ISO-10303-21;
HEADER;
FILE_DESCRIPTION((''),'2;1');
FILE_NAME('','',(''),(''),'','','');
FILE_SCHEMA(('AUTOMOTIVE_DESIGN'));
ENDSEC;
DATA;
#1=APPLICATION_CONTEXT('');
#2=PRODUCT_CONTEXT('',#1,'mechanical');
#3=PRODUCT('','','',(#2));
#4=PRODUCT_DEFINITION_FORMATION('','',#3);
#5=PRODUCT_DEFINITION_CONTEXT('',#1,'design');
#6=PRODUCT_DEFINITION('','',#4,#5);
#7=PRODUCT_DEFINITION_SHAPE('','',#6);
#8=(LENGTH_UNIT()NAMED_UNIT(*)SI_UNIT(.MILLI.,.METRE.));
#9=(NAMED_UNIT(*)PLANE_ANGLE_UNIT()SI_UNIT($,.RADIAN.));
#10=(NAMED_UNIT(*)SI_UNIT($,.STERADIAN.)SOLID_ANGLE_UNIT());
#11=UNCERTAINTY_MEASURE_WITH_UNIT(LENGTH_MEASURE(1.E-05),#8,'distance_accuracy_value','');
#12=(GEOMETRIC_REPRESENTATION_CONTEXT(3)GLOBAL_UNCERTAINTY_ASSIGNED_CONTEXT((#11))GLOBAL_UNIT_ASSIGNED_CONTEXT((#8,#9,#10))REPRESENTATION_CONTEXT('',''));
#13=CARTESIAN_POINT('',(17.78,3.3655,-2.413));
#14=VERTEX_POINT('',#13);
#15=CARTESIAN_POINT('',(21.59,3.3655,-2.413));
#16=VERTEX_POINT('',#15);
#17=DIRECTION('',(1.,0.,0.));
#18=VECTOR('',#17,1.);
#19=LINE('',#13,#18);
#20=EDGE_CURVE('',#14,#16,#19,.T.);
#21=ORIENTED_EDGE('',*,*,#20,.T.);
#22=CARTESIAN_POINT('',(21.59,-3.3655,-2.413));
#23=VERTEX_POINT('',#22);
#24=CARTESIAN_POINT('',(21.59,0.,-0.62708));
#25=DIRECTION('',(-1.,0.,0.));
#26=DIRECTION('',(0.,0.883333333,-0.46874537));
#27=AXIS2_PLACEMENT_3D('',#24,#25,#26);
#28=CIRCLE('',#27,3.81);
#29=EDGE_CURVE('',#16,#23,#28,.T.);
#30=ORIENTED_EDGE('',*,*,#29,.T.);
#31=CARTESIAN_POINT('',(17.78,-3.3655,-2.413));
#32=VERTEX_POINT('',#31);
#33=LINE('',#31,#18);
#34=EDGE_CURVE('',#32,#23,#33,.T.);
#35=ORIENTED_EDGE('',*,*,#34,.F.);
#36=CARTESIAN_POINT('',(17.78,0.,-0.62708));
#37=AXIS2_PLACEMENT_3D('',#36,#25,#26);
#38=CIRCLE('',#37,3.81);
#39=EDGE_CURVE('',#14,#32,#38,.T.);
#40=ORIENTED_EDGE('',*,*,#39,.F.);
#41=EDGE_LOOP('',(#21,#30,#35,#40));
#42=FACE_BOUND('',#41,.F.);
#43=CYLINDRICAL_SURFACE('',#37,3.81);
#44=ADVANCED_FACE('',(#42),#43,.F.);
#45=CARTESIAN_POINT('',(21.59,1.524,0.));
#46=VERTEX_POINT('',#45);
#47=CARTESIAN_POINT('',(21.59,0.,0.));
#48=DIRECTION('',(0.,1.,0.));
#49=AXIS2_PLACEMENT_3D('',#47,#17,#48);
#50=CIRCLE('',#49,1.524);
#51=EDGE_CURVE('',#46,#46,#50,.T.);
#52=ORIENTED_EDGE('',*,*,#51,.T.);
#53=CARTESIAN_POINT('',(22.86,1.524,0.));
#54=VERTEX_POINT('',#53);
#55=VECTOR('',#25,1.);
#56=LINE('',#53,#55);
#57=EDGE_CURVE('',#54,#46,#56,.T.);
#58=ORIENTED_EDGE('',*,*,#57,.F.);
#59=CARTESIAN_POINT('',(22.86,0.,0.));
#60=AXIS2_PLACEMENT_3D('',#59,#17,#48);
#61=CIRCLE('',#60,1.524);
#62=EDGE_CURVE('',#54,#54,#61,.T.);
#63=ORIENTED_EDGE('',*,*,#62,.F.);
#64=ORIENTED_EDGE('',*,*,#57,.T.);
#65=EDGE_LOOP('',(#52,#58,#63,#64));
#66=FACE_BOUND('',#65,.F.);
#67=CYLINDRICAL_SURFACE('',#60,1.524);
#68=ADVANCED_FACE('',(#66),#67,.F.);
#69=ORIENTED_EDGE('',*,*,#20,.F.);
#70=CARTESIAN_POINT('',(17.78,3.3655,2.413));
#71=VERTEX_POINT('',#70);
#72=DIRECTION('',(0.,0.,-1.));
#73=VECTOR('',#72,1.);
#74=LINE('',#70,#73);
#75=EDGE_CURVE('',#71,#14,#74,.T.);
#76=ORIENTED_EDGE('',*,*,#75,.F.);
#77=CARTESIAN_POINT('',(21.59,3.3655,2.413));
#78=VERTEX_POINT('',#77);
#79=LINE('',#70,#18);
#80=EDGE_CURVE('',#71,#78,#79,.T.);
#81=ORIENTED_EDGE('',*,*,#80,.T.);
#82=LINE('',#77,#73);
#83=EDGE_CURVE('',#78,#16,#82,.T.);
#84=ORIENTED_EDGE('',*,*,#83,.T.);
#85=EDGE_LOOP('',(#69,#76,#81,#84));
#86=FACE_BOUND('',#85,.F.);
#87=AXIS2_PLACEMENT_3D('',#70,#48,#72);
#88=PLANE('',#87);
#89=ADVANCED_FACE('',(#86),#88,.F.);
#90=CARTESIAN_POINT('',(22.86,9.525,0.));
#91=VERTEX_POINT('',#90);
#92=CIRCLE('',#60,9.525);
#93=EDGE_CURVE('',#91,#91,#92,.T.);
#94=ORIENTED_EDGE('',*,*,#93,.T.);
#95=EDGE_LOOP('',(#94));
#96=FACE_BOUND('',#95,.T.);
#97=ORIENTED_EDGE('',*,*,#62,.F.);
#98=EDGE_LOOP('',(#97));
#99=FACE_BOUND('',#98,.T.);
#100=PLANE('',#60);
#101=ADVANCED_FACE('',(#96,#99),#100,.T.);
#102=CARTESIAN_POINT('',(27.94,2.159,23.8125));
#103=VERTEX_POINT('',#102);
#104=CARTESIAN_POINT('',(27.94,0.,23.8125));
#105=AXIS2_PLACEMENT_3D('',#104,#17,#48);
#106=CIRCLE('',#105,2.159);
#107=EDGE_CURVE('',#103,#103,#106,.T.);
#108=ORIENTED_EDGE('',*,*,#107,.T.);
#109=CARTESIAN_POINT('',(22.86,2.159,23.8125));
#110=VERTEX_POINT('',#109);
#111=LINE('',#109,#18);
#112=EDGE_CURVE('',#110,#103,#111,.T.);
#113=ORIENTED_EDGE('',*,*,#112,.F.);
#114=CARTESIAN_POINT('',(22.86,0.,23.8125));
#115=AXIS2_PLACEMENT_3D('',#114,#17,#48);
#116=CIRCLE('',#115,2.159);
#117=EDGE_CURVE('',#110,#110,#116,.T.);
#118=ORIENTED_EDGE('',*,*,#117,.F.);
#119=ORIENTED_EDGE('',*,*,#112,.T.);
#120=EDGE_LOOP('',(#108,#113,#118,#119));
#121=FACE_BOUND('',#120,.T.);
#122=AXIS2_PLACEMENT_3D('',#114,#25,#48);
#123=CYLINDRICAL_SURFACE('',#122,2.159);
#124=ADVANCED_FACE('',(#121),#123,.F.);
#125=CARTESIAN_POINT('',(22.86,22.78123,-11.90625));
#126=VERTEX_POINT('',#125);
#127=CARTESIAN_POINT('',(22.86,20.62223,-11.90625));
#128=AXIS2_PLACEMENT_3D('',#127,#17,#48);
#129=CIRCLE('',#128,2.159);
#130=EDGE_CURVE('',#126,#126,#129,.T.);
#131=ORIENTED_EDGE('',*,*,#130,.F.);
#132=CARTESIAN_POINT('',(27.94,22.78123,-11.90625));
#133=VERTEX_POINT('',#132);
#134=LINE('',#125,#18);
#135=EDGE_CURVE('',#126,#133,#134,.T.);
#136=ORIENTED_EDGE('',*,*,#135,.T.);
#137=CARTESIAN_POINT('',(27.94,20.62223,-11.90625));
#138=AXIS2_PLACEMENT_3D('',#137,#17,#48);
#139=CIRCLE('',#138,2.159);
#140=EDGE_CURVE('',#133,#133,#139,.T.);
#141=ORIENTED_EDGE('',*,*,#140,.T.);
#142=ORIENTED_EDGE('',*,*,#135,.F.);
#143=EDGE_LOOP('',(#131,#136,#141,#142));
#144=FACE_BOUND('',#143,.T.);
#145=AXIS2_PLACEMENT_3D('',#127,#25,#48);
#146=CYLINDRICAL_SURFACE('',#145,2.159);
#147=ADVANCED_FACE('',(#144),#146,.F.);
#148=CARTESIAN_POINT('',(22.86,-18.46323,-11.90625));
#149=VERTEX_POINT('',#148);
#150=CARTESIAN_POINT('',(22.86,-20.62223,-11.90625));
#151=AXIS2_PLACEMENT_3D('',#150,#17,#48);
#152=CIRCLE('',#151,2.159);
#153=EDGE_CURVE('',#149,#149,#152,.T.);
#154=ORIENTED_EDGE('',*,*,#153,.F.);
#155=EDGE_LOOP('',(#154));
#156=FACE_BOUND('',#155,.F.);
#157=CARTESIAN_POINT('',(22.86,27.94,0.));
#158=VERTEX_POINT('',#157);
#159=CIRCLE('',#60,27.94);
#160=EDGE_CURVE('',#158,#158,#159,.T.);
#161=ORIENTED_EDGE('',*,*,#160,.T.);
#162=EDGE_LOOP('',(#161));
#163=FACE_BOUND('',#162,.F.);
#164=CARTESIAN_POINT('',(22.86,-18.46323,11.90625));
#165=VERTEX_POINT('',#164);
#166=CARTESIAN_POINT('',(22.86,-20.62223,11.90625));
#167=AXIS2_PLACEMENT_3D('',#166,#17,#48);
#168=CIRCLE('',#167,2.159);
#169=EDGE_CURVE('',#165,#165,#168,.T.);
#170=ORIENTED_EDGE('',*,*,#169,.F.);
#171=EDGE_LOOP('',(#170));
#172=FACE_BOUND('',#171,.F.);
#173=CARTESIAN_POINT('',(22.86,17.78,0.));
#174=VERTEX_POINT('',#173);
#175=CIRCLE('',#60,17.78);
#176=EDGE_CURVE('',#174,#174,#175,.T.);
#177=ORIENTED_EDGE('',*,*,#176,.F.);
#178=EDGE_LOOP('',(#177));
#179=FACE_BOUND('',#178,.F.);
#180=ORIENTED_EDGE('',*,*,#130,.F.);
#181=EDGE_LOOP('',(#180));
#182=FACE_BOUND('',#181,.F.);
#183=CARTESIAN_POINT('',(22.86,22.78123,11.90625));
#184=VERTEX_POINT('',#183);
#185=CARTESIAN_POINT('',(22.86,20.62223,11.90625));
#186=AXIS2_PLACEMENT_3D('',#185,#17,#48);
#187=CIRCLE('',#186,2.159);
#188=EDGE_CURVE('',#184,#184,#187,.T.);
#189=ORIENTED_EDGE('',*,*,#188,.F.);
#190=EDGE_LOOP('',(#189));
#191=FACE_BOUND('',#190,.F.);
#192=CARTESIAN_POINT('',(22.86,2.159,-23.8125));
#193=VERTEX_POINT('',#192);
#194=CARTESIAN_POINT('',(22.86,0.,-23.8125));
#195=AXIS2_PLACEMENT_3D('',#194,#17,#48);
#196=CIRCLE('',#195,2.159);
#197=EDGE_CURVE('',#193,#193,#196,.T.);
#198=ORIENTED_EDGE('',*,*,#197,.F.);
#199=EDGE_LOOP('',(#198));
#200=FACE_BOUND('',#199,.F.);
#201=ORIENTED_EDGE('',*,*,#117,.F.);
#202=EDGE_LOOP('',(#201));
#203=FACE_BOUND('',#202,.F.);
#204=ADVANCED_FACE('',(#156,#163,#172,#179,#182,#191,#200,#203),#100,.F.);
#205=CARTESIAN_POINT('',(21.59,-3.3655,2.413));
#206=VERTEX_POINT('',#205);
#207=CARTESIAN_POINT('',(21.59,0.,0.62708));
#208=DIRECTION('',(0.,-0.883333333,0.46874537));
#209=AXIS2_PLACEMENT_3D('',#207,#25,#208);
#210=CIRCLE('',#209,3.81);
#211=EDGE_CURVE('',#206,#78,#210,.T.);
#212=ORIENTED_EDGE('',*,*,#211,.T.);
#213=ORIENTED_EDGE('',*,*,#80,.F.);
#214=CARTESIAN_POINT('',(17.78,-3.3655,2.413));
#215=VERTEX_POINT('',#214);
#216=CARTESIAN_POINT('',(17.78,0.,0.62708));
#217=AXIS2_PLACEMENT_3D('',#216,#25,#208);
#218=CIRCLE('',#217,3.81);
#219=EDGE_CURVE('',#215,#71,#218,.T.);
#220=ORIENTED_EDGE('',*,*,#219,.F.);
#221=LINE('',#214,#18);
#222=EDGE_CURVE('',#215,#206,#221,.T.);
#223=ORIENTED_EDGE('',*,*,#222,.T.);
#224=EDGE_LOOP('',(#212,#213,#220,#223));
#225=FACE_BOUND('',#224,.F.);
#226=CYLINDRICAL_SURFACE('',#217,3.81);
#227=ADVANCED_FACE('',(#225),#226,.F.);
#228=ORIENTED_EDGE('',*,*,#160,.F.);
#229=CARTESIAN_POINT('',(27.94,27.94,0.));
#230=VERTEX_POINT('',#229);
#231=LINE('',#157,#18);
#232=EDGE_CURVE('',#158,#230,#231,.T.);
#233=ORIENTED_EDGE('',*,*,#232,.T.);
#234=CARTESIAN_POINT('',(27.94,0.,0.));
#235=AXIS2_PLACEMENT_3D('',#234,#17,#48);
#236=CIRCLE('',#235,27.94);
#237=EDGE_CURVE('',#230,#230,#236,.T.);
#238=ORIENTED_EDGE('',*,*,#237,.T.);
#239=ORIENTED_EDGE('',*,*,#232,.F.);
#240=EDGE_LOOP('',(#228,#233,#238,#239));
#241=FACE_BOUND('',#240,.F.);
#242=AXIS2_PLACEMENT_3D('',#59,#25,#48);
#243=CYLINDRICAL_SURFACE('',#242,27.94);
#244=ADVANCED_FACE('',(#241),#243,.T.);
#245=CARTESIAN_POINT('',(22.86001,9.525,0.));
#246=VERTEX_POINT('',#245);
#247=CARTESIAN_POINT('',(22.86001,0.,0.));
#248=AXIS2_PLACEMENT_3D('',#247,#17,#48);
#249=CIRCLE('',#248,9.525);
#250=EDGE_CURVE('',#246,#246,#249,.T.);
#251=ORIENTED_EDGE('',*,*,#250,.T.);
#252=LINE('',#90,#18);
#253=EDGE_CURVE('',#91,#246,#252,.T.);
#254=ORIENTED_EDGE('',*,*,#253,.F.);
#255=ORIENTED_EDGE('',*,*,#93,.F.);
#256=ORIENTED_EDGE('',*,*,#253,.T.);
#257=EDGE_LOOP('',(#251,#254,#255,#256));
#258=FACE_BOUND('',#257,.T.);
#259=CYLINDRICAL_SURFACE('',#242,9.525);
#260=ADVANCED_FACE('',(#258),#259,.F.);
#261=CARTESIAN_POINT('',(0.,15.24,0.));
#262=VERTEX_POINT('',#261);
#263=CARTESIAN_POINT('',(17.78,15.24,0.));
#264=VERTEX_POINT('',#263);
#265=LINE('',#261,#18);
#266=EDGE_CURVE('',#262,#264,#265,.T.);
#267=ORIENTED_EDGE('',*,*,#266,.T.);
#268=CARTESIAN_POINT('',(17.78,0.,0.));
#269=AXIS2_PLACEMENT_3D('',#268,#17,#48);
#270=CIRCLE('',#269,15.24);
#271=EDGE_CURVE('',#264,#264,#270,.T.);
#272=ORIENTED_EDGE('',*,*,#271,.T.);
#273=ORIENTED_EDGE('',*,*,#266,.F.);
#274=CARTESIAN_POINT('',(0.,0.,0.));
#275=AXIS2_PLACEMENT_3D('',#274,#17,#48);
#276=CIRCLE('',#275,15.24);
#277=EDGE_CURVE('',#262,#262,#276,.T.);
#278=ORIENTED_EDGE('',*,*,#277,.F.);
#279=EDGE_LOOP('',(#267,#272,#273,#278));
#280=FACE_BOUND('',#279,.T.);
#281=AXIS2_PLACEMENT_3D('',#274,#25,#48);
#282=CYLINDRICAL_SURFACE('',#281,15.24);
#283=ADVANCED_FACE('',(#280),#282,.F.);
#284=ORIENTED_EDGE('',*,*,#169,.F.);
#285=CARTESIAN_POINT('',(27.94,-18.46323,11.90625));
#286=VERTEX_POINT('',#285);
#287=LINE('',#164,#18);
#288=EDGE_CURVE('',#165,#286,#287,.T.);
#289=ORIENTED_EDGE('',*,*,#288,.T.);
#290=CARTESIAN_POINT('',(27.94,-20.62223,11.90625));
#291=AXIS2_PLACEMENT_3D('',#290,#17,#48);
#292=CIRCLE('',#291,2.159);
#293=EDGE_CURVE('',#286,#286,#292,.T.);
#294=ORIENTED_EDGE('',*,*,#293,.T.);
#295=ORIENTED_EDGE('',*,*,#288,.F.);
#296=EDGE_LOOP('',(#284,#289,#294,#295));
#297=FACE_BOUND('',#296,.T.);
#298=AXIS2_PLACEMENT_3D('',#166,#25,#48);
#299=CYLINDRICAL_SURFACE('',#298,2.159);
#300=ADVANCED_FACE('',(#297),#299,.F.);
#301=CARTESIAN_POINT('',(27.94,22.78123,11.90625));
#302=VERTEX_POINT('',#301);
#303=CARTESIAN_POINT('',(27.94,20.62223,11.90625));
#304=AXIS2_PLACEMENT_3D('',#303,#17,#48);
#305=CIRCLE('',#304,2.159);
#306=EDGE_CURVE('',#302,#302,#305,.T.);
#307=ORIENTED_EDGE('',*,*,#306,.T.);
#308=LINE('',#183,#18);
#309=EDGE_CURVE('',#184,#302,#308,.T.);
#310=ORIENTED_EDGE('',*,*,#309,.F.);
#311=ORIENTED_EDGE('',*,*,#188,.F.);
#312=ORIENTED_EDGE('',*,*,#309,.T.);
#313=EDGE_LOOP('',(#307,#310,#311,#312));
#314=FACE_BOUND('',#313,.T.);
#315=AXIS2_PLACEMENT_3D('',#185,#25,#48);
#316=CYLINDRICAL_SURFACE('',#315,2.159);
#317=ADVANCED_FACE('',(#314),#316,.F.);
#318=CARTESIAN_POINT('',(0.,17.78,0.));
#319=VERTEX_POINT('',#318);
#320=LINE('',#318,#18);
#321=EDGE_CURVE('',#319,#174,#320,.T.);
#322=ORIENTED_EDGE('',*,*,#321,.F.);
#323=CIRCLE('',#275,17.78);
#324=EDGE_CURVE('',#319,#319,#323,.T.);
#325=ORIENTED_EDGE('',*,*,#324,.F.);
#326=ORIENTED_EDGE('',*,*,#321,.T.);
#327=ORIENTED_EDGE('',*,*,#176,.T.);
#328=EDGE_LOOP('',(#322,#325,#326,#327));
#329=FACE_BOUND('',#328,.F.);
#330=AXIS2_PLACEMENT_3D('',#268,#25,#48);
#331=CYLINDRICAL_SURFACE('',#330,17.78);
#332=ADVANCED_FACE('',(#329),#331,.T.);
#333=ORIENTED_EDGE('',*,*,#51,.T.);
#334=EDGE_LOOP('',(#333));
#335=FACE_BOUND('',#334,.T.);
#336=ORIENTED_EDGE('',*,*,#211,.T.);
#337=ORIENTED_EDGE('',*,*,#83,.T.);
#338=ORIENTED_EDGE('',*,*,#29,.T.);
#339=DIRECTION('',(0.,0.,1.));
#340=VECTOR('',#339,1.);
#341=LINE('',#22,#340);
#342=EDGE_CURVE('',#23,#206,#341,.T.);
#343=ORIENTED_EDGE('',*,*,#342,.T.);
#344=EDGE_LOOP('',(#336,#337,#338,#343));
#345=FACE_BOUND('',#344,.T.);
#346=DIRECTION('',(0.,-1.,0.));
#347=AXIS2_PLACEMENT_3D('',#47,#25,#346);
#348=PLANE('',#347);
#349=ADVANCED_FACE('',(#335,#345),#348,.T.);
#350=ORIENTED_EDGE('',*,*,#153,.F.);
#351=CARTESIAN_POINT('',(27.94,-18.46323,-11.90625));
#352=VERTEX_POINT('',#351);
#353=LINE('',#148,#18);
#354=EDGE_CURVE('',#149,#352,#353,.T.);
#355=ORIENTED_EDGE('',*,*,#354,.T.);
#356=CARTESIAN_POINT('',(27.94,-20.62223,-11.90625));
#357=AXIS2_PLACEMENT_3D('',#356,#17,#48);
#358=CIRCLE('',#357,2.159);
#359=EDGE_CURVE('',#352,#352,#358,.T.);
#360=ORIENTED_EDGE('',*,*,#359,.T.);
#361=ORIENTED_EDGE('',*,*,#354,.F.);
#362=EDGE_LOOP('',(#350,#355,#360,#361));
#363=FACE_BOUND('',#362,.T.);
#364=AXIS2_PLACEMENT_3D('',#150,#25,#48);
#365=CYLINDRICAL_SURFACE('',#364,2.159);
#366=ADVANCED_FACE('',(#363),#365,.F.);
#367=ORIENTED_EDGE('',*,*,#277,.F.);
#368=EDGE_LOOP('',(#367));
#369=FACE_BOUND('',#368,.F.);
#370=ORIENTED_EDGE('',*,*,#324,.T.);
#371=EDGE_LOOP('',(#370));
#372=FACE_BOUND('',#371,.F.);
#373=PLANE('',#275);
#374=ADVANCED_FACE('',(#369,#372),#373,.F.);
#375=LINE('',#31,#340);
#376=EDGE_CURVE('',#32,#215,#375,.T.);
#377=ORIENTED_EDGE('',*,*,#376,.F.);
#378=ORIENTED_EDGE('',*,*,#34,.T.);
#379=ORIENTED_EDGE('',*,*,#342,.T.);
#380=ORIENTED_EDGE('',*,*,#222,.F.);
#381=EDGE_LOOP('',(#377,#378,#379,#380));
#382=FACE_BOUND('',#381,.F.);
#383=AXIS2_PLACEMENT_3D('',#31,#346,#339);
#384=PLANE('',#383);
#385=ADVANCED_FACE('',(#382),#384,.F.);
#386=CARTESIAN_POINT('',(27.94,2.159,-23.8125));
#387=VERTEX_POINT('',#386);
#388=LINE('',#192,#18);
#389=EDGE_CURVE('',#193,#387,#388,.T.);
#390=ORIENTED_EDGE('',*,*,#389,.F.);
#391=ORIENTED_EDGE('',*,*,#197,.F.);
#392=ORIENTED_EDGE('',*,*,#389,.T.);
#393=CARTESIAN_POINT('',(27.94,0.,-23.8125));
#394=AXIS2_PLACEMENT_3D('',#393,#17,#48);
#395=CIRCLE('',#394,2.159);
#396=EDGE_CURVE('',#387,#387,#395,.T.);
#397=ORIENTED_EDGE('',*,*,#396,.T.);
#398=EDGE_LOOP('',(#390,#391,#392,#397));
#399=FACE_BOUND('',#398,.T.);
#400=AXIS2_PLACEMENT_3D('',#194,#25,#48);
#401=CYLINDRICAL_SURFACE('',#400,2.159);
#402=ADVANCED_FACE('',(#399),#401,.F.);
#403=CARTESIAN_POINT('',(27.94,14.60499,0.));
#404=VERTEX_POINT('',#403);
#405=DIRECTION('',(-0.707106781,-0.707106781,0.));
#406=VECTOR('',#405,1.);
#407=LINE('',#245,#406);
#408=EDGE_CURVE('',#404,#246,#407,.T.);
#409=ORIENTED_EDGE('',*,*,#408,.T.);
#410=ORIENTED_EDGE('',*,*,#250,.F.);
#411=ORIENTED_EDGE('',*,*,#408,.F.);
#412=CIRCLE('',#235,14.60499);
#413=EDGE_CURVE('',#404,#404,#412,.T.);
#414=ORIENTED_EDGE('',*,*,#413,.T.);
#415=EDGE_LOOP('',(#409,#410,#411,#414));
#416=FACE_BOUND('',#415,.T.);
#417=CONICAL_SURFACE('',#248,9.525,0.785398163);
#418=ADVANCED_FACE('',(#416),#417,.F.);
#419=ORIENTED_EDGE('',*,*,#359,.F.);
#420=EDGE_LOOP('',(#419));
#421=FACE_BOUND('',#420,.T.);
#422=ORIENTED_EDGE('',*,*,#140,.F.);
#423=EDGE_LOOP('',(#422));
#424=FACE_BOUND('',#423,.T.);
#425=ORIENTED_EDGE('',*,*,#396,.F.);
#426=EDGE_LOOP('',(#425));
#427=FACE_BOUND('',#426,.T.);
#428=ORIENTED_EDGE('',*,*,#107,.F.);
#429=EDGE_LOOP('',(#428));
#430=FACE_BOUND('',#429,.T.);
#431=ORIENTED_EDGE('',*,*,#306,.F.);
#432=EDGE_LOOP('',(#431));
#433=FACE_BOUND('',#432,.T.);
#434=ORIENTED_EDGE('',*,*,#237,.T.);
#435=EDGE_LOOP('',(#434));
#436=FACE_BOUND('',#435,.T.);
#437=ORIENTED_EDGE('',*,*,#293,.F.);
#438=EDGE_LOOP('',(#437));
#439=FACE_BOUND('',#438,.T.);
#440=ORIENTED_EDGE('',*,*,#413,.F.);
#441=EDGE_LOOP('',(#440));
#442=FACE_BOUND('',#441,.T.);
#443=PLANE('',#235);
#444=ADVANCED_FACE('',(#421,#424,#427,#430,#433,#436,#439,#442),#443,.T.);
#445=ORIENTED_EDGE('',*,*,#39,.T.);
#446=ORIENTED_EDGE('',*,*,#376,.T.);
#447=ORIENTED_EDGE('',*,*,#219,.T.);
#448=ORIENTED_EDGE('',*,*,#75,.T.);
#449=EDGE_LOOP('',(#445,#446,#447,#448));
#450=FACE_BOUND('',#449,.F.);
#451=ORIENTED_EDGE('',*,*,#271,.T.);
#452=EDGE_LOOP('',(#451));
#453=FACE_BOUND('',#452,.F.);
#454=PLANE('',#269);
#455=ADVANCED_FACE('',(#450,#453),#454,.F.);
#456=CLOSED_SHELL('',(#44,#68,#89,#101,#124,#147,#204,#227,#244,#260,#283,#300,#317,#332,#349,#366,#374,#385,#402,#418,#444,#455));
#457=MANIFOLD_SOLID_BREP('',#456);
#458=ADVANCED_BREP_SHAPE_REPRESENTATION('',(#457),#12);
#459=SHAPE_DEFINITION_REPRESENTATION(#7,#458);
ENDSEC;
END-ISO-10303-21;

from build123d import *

# Parameters (mm, degrees)
F0_R      = 17.78
F0_R_2    = 15.24
F1_DEPTH  = 17.78
F2_R      = 17.78
F3_DEPTH  = 5.08
F4_R      = 1.524
F5_DEPTH  = 25.4
F6_R      = 27.94
F6_R_2    = 2.159
F6_R_3    = 9.525
F7_DEPTH  = 5.08
F8_SIZE   = 5.07999
F10_DEPTH = 3.81


# Not quite as in the source:
# - a fillet or chamfer is up to 0.001 mm smaller than in the source, because OpenCascade refuses the exact size


with BuildPart() as f1:
    # F0 (on Right) → F1 (new body)
    with BuildSketch(Plane.YZ):
        Circle(F0_R)
        Circle(F0_R_2, mode=Mode.SUBTRACT)
    extrude(amount=F1_DEPTH)

    # F2 (on face) → F3 (join)
    with BuildSketch(Plane.YZ.offset(17.78)):
        Circle(F2_R)
    extrude(amount=F3_DEPTH)

    # F4 (on face) → F5 (cut)
    with BuildSketch(Plane.YZ.offset(22.86)):
        Circle(F4_R)
    extrude(amount=-F5_DEPTH, mode=Mode.SUBTRACT)

    # F6 (on face) → F7 (join)
    with BuildSketch(Plane.YZ.offset(22.86)):
        Circle(F6_R)
        with Locations((0, -23.8125)):
            Circle(F6_R_2, mode=Mode.SUBTRACT)
        with Locations((-20.6222299276, -11.90625)):
            Circle(F6_R_2, mode=Mode.SUBTRACT)
        Circle(F6_R_3, mode=Mode.SUBTRACT)
        with Locations((20.6222299276, -11.90625)):
            Circle(F6_R_2, mode=Mode.SUBTRACT)
        with Locations((-20.6222299276, 11.90625)):
            Circle(F6_R_2, mode=Mode.SUBTRACT)
        with Locations((0, 23.8125)):
            Circle(F6_R_2, mode=Mode.SUBTRACT)
        with Locations((20.6222299276, 11.90625)):
            Circle(F6_R_2, mode=Mode.SUBTRACT)
    extrude(amount=F7_DEPTH)

    # F8 (size 5.08 in the source; OpenCascade refuses exactly that, so slightly less here)
    f8_edges = [f1.edges().sort_by_distance(p)[0] for p in [
        (27.94, -9.525, 0),
    ]]
    chamfer(f8_edges, length=F8_SIZE)

    # F9 (on face) → F10 (cut)
    with BuildSketch(Plane(origin=(17.78, 0, 0), x_dir=(0, -1, 0), z_dir=(-1, 0, 0))):
        with BuildLine():
            ThreePointArc((3.3655, 2.413), (0, 4.437080139), (-3.3655, 2.413))
            Line((-3.3655, 2.413), (-3.3655, -2.413))
            ThreePointArc((-3.3655, -2.413), (0, -4.437080139), (3.3655, -2.413))
            Line((3.3655, -2.413), (3.3655, 2.413))
        make_face()
    extrude(amount=-F10_DEPTH, mode=Mode.SUBTRACT)


solid = f1.part
